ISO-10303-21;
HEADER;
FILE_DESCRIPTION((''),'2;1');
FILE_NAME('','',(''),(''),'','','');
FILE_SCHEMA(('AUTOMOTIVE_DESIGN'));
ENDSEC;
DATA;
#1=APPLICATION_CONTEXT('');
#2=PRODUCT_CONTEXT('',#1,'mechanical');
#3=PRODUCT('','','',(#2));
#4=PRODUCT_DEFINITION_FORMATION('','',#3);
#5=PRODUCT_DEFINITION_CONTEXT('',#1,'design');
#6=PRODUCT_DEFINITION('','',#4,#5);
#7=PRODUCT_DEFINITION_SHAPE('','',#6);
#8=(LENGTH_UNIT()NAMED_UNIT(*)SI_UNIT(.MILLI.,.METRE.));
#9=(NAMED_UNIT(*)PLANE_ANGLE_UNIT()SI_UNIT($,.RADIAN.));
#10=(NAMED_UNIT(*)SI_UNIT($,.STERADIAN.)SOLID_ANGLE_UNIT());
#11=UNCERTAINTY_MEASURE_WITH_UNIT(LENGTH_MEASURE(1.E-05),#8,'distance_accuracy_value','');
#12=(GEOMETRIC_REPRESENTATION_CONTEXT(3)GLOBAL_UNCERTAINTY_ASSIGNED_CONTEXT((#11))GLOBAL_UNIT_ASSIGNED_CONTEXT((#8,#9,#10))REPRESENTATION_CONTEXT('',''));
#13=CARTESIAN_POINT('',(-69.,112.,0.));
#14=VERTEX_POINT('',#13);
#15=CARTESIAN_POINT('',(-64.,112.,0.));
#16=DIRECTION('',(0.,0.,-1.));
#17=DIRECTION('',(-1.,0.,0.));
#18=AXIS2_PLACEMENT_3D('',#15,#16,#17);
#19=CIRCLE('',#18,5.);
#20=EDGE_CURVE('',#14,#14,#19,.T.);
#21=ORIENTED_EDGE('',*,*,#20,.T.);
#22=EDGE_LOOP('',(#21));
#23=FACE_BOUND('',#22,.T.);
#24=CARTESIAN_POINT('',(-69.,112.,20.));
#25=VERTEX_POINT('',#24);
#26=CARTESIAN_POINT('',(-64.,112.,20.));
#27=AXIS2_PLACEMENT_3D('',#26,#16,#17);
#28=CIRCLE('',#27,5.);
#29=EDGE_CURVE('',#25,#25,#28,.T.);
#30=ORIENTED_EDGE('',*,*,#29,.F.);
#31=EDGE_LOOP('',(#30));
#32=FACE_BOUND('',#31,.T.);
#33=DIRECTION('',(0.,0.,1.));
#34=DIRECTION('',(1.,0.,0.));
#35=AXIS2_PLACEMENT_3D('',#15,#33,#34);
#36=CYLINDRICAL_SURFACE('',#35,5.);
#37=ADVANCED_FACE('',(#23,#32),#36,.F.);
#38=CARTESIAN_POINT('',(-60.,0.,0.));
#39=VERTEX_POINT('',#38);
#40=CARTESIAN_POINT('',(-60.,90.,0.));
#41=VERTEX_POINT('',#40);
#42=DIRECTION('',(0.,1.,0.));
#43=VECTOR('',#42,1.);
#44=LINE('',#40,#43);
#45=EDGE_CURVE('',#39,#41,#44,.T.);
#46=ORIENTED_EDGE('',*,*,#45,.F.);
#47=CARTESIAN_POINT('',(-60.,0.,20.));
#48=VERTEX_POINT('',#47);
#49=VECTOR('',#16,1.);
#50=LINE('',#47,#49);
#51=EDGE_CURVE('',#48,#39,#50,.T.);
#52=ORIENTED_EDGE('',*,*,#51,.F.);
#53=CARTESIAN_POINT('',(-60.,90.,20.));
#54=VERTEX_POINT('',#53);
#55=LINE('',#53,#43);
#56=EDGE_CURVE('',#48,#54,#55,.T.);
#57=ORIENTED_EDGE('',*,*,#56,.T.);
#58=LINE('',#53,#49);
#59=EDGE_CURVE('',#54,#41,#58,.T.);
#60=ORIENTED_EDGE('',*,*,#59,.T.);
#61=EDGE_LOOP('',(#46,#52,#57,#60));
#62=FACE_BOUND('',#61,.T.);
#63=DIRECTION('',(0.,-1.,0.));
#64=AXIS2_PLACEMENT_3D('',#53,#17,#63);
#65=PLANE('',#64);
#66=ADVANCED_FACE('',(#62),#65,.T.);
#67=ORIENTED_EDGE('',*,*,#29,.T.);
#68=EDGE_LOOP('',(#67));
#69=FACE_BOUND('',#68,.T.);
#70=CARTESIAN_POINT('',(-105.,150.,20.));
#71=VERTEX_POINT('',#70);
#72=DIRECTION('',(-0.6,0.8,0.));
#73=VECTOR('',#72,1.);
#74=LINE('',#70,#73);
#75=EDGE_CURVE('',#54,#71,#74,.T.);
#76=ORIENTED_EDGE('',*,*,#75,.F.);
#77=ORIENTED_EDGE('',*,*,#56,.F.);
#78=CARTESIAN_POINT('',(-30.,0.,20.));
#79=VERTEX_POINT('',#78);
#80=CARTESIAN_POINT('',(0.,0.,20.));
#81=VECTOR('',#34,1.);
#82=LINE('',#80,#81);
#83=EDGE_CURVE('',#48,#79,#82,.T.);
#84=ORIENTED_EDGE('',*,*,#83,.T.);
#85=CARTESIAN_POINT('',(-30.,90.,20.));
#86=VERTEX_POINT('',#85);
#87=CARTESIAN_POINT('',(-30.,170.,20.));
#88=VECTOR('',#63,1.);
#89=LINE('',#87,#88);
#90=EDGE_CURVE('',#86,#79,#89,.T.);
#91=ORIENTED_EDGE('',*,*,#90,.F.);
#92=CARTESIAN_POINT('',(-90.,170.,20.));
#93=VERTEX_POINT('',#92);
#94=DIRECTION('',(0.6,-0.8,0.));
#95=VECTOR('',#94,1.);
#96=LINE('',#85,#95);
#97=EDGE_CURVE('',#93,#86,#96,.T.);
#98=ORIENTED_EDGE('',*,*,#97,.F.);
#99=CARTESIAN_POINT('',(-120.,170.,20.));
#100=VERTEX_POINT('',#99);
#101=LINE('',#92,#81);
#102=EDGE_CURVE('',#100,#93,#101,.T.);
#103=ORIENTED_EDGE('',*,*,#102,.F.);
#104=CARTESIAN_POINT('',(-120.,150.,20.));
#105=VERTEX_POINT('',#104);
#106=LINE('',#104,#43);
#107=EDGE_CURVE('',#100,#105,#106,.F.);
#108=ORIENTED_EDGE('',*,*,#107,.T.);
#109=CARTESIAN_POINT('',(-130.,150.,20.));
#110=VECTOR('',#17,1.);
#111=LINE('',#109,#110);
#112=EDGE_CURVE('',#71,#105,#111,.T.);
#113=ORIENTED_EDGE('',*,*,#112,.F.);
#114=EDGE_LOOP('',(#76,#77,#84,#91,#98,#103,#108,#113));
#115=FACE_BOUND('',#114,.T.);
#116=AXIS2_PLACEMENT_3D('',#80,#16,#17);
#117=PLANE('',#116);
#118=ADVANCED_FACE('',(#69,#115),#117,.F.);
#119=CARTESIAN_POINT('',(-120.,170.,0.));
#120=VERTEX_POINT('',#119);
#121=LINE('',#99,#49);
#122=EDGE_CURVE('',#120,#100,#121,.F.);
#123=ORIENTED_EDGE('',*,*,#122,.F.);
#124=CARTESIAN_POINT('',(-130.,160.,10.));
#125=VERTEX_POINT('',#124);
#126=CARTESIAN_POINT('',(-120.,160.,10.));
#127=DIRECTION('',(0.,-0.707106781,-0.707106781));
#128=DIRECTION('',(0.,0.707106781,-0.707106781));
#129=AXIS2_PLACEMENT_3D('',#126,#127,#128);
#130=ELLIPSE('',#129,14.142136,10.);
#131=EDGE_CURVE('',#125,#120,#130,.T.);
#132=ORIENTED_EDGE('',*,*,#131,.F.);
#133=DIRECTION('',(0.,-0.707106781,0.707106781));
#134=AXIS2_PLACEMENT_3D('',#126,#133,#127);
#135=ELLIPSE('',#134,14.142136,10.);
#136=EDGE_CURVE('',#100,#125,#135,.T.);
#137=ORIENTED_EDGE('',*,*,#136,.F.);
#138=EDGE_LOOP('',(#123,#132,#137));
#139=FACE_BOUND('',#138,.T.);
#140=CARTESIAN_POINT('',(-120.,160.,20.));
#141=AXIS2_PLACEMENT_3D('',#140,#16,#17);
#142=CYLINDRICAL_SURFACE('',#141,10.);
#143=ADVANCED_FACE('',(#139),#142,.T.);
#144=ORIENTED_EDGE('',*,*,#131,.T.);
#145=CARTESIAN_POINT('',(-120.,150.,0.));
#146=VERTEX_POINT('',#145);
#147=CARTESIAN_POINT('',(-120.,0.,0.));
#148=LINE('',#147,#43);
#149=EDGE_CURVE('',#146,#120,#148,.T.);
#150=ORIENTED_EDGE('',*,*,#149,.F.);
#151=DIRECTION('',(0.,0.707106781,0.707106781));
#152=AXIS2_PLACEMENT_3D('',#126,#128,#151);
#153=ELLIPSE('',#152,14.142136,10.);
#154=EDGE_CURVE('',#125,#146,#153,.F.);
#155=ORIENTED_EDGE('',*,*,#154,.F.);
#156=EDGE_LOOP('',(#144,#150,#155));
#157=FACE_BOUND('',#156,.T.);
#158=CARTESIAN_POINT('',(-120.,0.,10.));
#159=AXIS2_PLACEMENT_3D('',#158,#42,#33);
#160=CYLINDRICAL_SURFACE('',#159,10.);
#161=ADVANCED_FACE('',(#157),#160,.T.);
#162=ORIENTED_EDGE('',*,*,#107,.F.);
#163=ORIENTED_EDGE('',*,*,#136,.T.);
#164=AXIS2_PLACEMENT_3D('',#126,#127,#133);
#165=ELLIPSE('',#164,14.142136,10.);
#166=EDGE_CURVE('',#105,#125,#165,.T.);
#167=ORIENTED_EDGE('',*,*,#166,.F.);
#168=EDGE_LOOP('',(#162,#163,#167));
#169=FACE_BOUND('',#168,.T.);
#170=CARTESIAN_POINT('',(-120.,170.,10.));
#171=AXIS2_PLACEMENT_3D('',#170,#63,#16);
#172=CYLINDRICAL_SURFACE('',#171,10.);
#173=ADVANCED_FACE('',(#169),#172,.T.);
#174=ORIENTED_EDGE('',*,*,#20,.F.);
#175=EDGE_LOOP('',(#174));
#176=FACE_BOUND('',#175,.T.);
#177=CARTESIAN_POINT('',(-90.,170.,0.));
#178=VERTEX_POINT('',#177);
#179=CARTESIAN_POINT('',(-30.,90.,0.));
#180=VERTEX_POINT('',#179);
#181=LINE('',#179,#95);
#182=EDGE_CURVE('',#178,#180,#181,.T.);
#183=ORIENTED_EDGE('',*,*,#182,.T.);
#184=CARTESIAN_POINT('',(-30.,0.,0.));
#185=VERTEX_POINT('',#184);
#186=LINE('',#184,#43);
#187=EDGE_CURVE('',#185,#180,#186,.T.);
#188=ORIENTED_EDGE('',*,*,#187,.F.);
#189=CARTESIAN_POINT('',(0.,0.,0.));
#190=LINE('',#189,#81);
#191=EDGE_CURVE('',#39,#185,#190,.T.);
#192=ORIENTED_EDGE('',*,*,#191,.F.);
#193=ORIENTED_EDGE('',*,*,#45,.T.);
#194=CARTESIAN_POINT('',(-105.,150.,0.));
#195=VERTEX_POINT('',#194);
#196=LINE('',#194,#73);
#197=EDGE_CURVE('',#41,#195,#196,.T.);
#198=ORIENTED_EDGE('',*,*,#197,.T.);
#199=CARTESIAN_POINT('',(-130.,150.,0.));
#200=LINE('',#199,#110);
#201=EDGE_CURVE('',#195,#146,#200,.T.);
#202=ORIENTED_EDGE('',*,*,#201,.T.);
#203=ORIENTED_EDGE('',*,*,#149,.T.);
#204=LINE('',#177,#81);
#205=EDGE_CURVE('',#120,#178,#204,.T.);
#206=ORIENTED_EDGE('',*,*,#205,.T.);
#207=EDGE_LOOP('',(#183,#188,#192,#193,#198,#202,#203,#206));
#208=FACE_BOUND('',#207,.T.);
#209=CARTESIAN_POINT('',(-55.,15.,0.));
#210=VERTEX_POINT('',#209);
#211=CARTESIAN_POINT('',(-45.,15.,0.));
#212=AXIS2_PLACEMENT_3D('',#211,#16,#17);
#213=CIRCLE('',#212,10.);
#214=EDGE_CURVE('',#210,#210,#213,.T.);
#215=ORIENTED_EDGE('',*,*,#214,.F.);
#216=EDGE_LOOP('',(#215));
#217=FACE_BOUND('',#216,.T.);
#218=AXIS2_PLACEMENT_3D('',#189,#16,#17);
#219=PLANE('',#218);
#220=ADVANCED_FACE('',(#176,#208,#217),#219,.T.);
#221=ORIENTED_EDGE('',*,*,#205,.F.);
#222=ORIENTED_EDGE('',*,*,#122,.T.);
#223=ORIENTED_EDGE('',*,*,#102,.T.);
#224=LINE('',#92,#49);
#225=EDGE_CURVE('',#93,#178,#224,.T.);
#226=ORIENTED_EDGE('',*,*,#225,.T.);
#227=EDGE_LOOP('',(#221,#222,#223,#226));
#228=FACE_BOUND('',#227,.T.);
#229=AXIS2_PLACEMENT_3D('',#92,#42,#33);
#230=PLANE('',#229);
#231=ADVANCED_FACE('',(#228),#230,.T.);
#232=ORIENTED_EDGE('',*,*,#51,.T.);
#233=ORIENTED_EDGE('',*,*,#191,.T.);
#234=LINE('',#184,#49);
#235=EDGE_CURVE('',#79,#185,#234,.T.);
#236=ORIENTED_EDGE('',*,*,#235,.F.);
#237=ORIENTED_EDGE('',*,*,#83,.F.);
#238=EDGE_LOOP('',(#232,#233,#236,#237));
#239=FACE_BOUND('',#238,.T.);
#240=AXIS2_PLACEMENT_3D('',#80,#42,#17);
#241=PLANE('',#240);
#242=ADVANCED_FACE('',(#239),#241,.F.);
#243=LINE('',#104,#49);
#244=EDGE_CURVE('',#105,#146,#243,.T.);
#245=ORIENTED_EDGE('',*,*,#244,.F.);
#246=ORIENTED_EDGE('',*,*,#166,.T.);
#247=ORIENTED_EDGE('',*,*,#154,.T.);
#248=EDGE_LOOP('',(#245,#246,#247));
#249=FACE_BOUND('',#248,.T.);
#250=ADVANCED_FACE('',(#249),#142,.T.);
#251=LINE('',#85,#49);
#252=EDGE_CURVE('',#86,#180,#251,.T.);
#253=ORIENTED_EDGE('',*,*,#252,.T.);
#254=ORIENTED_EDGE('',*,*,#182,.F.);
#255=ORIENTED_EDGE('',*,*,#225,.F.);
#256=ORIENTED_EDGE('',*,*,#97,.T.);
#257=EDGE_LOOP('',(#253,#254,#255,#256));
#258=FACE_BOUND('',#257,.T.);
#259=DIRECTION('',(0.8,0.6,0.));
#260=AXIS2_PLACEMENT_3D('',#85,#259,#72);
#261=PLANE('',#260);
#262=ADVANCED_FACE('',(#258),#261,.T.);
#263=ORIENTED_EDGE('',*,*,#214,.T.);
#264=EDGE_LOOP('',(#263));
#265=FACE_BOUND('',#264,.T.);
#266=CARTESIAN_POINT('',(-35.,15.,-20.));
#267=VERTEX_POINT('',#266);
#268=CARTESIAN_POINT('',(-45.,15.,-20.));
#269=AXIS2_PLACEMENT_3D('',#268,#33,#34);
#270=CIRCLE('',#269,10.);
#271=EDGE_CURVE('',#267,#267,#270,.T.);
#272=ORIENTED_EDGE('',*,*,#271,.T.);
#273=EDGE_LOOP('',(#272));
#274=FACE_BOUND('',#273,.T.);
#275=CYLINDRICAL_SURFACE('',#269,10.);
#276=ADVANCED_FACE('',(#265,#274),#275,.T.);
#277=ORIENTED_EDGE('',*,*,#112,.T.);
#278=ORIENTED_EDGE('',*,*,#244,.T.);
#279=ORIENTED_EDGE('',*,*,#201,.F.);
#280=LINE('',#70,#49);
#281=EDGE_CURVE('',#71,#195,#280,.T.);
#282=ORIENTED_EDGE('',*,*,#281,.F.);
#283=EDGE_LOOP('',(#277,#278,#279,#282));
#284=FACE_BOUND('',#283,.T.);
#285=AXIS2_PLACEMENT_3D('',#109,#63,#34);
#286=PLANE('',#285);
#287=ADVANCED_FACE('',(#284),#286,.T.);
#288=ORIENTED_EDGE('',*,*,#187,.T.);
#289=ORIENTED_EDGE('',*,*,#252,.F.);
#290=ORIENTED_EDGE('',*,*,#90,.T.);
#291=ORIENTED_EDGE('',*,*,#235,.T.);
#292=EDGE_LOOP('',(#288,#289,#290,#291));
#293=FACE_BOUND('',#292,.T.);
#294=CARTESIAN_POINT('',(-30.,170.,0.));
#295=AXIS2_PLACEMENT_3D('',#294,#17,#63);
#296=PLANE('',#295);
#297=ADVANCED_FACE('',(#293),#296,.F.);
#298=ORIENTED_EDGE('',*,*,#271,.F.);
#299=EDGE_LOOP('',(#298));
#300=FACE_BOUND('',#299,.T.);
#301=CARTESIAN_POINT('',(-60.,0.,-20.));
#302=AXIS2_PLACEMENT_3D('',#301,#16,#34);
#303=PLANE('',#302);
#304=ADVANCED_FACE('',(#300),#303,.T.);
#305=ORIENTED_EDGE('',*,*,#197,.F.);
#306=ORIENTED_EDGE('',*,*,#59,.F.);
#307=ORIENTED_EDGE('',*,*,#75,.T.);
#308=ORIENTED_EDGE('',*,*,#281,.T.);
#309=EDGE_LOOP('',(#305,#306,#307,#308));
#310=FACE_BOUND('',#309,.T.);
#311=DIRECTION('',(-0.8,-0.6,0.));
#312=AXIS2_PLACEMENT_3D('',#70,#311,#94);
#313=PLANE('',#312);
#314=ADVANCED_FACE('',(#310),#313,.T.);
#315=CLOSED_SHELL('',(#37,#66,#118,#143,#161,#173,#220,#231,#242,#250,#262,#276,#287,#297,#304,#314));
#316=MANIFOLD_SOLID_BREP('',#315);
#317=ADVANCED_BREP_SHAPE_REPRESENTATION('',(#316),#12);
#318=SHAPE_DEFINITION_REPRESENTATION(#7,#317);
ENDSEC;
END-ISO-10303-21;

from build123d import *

# Parameters (mm, degrees)
EXTRUDE_1_DEPTH        = 20
FILLET_2_R             = 10
EXTRUDE_2_DEPTH        = 20
SKETCH_6_R             = 5
CUT_EXTRUDE_1_DEPTH    = 20
FILLET_2_OF_MIRROR_3_R = 10
SKETCH_8_W             = 30
SKETCH_8_H             = 20
CUT_EXTRUDE_2_DEPTH    = 215.941852602


with BuildPart() as part:
    # 草图4 → 凸台-拉伸1 (new body)
    with BuildSketch(Plane.XY):
        Polygon((0, 0), (-30, 0), (-30, 90), (30, 170), (70, 170), (70, 150), (45, 150), (0, 90), align=None)
    extrude_1 = extrude(amount=EXTRUDE_1_DEPTH)

    # 圆角2
    fillet_2_edges = [part.edges().sort_by_distance(p)[0] for p in [
        (70, 160, 0),
        (70, 170, 10),
        (70, 150, 10),
        (70, 160, 20),
    ]]
    fillet(fillet_2_edges, radius=FILLET_2_R - 0.0001)  # a hair under: the kernel refuses the full size

    # 草图5 → 凸台-拉伸2 (add)
    with BuildSketch(Plane(origin=(0, 0, 0), x_dir=(-1, 0, 0), z_dir=(0, 0, -1))):
        with BuildLine():
            ThreePointArc((7.928932188, 22.071067812), (5, 15), (7.928932188, 7.928932188))
            Line((7.928932188, 7.928932188), (15, 15))
            Line((15, 15), (7.928932188, 22.071067812))
        make_face()
        with BuildLine():
            Line((15, 15), (7.928932188, 7.928932188))
            ThreePointArc((7.928932188, 7.928932188), (15, 5), (22.071067812, 7.928932188))
            Line((22.071067812, 7.928932188), (15, 15))
        make_face()
        with BuildLine():
            Line((15, 15), (22.071067812, 7.928932188))
            ThreePointArc((22.071067812, 7.928932188), (24.238795325, 11.173165676), (25, 15))
            ThreePointArc((25, 15), (24.238795325, 18.826834324), (22.071067812, 22.071067812))
            Line((22.071067812, 22.071067812), (15, 15))
        make_face()
        with BuildLine():
            ThreePointArc((22.071067812, 22.071067812), (15, 25), (7.928932188, 22.071067812))
            Line((7.928932188, 22.071067812), (15, 15))
            Line((15, 15), (22.071067812, 22.071067812))
        make_face()
    extrude_2 = extrude(amount=EXTRUDE_2_DEPTH)

    # 草图6 → 切除-拉伸1 (cut)
    with BuildSketch(Plane.XY.offset(20)):
        with Locations((4, 112)):
            Circle(SKETCH_6_R)
    cut_extrude_1 = extrude(amount=-CUT_EXTRUDE_1_DEPTH, mode=Mode.SUBTRACT)

    # 镜向3: 凸台-拉伸1, 凸台-拉伸2, 切除-拉伸1 across plane
    add(extrude_1.mirror(Plane(origin=(-30, 0, 20), x_dir=(0, 0, 1), z_dir=(1, 0, 0))))
    add(extrude_2.mirror(Plane(origin=(-30, 0, 20), x_dir=(0, 0, 1), z_dir=(1, 0, 0))))
    add(cut_extrude_1.mirror(Plane(origin=(-30, 0, 20), x_dir=(0, 0, 1), z_dir=(1, 0, 0))), mode=Mode.SUBTRACT)

    # 圆角2 of 镜向3
    fillet_2_of_mirror_3_edges = [part.edges().sort_by_distance(p)[0] for p in [
        (-130, 160, 0),
        (-130, 170, 10),
        (-130, 150, 10),
        (-130, 160, 20),
    ]]
    fillet(fillet_2_of_mirror_3_edges, radius=FILLET_2_OF_MIRROR_3_R - 0.0001)  # a hair under: the kernel refuses the full size

    # 草图8 → 切除-拉伸2 (cut, through all)
    with BuildSketch(Plane.XZ):
        Polygon((88.976151269, 20), (0, 20), (0, 0), (-30, 0), (-30, -22.976425092), (88.976151269, -22.976425092), align=None)
        with Locations((-15, 10)):
            Rectangle(SKETCH_8_W, SKETCH_8_H)
    extrude(amount=-CUT_EXTRUDE_2_DEPTH, mode=Mode.SUBTRACT)


solid = part.part
